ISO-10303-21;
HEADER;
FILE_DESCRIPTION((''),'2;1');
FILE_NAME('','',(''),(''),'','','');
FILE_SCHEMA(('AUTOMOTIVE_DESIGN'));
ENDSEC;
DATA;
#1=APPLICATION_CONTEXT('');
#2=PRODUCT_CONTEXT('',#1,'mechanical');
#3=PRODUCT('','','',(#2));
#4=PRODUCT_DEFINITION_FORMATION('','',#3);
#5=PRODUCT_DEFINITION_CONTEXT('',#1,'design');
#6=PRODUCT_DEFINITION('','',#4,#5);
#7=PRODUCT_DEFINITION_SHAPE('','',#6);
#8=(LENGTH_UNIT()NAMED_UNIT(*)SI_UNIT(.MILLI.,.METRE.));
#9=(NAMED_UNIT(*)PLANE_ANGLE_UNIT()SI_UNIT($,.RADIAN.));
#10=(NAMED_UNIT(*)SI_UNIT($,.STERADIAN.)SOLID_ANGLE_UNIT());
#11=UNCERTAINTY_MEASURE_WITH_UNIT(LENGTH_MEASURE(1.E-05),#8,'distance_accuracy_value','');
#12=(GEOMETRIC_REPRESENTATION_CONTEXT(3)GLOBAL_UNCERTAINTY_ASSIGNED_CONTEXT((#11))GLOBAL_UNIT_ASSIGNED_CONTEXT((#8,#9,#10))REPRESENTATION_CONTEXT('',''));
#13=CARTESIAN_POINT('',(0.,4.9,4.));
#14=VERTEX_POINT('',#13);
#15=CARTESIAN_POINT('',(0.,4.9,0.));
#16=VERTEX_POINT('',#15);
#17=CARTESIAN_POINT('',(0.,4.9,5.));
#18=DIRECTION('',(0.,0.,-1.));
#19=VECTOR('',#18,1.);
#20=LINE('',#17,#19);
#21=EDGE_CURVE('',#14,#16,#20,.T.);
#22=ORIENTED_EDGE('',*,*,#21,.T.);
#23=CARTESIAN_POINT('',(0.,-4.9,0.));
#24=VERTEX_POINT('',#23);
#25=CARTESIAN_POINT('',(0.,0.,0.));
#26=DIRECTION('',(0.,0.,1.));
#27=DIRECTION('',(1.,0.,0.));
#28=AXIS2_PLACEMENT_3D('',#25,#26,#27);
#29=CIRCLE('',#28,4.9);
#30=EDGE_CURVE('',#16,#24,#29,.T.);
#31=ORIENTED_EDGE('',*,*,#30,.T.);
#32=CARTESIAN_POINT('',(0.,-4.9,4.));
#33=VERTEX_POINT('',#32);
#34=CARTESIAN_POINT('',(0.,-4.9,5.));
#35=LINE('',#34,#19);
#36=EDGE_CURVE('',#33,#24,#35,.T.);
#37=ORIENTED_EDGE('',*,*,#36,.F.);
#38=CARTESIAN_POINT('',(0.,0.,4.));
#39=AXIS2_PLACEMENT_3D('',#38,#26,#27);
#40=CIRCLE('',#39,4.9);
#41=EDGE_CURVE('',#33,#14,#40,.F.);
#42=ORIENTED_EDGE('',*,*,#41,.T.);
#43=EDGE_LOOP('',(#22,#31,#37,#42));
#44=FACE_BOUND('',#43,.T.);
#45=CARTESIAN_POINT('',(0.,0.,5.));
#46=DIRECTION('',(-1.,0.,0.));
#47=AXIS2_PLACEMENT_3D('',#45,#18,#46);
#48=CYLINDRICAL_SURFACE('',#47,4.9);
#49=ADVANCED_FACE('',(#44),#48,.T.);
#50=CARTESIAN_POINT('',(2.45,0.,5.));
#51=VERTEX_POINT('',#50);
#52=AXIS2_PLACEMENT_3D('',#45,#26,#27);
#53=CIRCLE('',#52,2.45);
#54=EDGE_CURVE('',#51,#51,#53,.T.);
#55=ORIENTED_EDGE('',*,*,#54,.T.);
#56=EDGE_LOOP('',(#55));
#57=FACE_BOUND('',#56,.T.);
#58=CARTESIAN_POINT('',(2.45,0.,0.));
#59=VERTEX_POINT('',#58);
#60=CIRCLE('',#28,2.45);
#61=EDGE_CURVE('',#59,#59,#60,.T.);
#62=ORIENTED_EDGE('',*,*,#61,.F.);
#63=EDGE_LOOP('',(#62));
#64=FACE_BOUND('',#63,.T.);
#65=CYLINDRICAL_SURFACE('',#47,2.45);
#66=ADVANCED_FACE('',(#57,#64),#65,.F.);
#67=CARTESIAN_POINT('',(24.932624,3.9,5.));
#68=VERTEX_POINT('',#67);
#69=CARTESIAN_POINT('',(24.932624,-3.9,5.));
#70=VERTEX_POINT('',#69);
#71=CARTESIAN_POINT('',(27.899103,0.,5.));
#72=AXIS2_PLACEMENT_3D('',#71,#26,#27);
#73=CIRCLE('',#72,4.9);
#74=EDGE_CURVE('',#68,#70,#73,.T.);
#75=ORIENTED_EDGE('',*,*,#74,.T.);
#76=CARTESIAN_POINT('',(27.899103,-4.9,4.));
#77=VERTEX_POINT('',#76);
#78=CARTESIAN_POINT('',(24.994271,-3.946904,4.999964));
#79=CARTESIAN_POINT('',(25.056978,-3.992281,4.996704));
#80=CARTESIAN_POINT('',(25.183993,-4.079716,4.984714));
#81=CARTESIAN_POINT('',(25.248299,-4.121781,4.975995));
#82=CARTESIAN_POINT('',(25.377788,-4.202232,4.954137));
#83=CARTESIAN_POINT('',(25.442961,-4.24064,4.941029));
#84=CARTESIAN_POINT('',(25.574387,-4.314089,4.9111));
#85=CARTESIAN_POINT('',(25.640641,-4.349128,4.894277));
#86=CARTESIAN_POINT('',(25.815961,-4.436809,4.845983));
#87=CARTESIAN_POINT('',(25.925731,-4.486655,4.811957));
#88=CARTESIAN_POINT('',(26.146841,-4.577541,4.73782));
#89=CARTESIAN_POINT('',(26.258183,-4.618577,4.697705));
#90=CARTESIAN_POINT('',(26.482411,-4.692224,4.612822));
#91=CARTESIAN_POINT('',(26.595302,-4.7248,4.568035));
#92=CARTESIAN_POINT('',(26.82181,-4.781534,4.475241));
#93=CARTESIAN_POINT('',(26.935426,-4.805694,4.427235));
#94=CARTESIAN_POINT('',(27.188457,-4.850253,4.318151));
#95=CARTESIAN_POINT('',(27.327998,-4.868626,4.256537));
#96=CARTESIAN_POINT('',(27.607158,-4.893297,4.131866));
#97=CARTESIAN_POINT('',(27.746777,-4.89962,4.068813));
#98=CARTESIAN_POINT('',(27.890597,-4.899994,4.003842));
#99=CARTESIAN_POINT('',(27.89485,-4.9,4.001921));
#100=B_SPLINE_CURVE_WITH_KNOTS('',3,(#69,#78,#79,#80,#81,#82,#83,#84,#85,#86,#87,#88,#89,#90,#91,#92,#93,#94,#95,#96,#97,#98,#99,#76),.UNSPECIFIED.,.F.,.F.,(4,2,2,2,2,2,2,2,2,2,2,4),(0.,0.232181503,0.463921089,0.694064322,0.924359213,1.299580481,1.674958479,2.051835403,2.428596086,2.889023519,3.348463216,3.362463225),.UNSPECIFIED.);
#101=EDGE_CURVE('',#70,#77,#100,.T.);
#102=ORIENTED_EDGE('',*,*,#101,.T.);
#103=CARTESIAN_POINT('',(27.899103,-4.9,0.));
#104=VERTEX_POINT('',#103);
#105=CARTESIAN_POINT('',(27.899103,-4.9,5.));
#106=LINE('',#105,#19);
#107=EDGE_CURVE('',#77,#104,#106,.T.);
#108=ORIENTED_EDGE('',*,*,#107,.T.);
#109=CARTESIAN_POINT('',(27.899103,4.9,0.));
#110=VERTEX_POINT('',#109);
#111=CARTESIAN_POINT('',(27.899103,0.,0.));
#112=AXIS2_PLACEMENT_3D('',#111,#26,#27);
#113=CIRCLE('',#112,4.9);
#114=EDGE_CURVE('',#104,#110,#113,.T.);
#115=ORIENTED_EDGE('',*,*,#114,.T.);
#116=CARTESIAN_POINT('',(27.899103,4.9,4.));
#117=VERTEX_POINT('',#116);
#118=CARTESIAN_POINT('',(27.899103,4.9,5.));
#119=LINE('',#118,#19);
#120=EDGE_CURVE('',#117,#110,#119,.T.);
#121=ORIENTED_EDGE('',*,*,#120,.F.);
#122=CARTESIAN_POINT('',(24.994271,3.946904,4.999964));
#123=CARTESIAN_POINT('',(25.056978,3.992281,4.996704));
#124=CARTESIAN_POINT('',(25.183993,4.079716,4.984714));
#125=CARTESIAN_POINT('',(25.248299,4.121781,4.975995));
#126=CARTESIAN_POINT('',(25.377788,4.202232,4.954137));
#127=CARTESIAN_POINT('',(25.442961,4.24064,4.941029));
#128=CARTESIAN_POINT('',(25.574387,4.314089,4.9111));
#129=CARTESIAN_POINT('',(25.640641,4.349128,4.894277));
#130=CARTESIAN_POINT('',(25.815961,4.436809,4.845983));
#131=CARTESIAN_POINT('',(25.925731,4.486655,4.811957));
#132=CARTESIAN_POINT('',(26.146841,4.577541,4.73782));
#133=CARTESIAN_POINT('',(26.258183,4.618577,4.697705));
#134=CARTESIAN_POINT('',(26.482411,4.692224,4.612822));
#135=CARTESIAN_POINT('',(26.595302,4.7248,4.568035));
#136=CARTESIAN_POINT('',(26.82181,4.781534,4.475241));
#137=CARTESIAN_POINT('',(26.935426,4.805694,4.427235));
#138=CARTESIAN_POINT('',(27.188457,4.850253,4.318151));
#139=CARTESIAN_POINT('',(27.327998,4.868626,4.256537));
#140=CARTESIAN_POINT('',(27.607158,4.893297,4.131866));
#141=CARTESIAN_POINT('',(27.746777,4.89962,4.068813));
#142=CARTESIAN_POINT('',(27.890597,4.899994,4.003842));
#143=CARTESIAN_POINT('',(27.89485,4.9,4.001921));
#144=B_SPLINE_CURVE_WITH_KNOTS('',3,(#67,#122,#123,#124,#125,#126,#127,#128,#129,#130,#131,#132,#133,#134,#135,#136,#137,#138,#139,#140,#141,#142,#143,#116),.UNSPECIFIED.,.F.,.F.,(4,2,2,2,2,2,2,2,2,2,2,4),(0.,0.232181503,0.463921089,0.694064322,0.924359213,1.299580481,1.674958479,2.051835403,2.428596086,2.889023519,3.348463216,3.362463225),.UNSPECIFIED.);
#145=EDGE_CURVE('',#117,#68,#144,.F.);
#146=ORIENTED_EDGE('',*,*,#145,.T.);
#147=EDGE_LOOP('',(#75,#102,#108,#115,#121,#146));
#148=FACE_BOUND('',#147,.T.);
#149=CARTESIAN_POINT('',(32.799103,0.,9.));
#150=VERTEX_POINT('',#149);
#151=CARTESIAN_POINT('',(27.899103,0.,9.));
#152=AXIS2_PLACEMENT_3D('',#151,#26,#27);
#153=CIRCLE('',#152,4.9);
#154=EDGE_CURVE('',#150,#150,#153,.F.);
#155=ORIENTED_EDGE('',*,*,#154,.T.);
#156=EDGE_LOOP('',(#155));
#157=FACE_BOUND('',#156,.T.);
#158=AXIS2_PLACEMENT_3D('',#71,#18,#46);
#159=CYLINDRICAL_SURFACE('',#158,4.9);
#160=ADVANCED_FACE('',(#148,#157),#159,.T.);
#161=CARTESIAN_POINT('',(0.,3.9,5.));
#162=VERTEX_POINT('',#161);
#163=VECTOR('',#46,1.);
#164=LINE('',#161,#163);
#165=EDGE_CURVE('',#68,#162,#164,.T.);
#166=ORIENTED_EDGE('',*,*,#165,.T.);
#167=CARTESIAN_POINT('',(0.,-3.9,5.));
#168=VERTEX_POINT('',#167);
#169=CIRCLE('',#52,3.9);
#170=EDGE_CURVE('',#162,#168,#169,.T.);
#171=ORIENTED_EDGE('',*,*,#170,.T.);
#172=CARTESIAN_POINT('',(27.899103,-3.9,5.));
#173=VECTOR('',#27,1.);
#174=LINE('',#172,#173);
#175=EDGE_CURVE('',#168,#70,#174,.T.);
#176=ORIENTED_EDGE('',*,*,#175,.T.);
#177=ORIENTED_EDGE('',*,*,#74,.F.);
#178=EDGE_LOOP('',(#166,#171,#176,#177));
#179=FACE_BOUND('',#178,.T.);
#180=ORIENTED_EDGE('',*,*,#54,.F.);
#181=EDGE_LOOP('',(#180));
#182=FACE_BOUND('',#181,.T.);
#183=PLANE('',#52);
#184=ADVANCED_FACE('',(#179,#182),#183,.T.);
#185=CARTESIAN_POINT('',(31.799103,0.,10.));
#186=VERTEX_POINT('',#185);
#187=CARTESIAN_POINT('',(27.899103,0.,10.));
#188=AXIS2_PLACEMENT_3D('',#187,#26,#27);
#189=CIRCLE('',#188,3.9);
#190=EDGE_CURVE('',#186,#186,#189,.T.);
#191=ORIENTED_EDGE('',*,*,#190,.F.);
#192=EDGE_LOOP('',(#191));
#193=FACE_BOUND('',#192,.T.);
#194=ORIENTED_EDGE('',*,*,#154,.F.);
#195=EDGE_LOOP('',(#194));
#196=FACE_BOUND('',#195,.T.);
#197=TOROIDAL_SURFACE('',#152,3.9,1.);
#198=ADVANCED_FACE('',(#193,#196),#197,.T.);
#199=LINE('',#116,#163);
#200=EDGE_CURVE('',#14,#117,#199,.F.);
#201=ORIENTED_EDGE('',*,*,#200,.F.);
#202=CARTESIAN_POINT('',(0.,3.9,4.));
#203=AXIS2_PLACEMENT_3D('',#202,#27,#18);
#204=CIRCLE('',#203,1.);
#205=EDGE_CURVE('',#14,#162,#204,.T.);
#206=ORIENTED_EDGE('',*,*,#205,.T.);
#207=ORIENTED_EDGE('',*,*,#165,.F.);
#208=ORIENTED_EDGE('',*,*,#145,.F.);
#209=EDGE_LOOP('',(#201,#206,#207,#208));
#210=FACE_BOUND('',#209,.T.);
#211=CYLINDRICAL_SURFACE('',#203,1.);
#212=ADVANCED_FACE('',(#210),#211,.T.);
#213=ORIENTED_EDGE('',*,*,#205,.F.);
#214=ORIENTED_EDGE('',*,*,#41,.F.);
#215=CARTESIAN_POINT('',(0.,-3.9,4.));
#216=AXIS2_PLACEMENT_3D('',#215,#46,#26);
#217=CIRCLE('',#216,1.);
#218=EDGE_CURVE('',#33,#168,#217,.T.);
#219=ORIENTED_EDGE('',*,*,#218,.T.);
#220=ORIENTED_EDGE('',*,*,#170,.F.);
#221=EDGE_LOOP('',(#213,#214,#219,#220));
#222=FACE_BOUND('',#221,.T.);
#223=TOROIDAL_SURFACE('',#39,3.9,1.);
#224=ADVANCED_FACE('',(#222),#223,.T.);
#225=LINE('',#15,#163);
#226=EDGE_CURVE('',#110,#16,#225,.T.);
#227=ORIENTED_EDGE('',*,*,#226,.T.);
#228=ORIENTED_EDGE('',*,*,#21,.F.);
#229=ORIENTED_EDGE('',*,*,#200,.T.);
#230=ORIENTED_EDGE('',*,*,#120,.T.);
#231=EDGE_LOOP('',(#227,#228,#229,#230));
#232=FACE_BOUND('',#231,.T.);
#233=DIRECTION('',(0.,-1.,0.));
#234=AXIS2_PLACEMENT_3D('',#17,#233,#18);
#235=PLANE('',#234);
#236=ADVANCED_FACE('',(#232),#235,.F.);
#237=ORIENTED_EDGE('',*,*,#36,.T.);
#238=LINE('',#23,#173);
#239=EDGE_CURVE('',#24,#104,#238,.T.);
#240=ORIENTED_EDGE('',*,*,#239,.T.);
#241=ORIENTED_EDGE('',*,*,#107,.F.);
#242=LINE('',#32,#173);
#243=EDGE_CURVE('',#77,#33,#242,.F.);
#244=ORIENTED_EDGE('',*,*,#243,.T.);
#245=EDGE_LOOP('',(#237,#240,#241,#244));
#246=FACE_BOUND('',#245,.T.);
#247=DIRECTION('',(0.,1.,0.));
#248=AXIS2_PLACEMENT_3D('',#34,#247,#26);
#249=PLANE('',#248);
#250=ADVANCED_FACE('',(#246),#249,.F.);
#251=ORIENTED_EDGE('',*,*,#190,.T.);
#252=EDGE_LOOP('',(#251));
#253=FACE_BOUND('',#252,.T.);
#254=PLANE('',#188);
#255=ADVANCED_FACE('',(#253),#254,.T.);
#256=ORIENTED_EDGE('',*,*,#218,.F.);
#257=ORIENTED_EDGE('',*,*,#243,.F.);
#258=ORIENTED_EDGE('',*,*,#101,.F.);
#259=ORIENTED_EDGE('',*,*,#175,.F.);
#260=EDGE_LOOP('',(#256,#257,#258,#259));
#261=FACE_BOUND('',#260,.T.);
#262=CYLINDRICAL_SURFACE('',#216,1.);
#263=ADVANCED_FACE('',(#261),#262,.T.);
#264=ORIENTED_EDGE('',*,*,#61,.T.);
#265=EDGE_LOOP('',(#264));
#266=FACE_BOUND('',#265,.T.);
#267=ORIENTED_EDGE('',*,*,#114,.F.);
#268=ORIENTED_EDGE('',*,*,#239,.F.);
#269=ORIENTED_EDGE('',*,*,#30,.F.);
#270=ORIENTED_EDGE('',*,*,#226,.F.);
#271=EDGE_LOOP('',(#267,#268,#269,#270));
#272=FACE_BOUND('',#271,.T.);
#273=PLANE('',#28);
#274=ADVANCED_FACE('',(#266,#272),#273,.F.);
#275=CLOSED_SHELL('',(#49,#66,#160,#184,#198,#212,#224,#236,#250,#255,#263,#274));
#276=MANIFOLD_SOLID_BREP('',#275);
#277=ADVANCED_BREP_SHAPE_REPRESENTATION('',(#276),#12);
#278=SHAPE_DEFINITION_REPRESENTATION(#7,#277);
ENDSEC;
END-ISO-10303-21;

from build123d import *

# Parameters (mm, degrees)
SKETCH1_R           = 2.45
BOSS_EXTRUDE1_DEPTH = 5
BOSS_EXTRUDE2_START = 5
SKETCH2_R           = 4.9
BOSS_EXTRUDE2_DEPTH = 5
FILLET1_R           = 1


with BuildPart() as part:
    # Sketch1 → Boss-Extrude1 (new body)
    with BuildSketch(Plane.XY):
        with BuildLine():
            Line((0, 4.9), (27.899102923, 4.9))
            ThreePointArc((27.899102923, 4.9), (32.799102923, 0), (27.899102923, -4.9))
            Line((27.899102923, -4.9), (0, -4.9))
            ThreePointArc((0, -4.9), (-4.9, 0), (0, 4.9))
        make_face()
        Circle(SKETCH1_R, mode=Mode.SUBTRACT)
    extrude(amount=BOSS_EXTRUDE1_DEPTH)

    # Sketch2 → Boss-Extrude2 (add)
    with BuildSketch(Plane.XY.offset(BOSS_EXTRUDE2_START)):
        with Locations(Location((27.899102923, 0, 0), (0, 0, 90))):
            Circle(SKETCH2_R)
    extrude(amount=BOSS_EXTRUDE2_DEPTH)

    # Fillet1
    # the kernel refuses this fillet: 1 mm, written as the material it takes off along each edge
    with BuildSketch(Plane(origin=(0, 4.9, 5), x_dir=(0, -1, 0), z_dir=(1, 0, 0))) as fillet1_piece_1_section:
        with BuildLine():
            CenterArc((FILLET1_R, FILLET1_R), FILLET1_R, 180, 90)
            Line((0, FILLET1_R), (0, 0))
            Line((0, 0), (FILLET1_R, 0))
        make_face()
    fillet1_piece_1 = extrude(amount=30.399102923, mode=Mode.PRIVATE)
    fillet1_piece_1 = fillet1_piece_1 - Plane(origin=(27.899102923, 0, 4.766386188), x_dir=(0, 1, 0), z_dir=(0, 0, -1)) * Cylinder(4.9, 65, mode=Mode.PRIVATE)
    add(fillet1_piece_1, mode=Mode.SUBTRACT)
    with BuildSketch(Plane(origin=(27.899102923, 0, 10), x_dir=(0, 1, 0), z_dir=(1, 0, 0))) as fillet1_piece_2:
        with BuildLine():
            CenterArc((4.9 - FILLET1_R, -FILLET1_R), FILLET1_R, 0, 90)
            Line((4.9 - FILLET1_R, 0), (4.9, 0))
            Line((4.9, 0), (4.9, -FILLET1_R))
        make_face()
    revolve(axis=Axis((27.899102923, 0, 10), (0, 0, 1)), mode=Mode.SUBTRACT)
    with BuildSketch(Plane(origin=(0, 0, 5), x_dir=(0, -1, 0), z_dir=(1, 0, 0))) as fillet1_piece_3:
        with BuildLine():
            CenterArc((4.9 - FILLET1_R, FILLET1_R), FILLET1_R, 270, 90)
            Line((4.9 - FILLET1_R, 0), (4.9, 0))
            Line((4.9, 0), (4.9, FILLET1_R))
        make_face()
    revolve(axis=Axis((0, 0, 5), (0, 0, -1)), revolution_arc=180, mode=Mode.SUBTRACT)
    with BuildSketch(Plane(origin=(30.399102923, -4.9, 5), x_dir=(0, 0, -1), z_dir=(-1, 0, 0))) as fillet1_piece_4_section:
        with BuildLine():
            CenterArc((FILLET1_R, -FILLET1_R), FILLET1_R, 90, 90)
            Line((0, -FILLET1_R), (0, 0))
            Line((0, 0), (FILLET1_R, 0))
        make_face()
    fillet1_piece_4 = extrude(amount=30.399102923, mode=Mode.PRIVATE)
    fillet1_piece_4 = fillet1_piece_4 - Plane(origin=(27.899102923, 0, 4.766386187), x_dir=(0, 1, 0), z_dir=(0, 0, -1)) * Cylinder(4.9, 65, mode=Mode.PRIVATE)
    add(fillet1_piece_4, mode=Mode.SUBTRACT)


solid = part.part
